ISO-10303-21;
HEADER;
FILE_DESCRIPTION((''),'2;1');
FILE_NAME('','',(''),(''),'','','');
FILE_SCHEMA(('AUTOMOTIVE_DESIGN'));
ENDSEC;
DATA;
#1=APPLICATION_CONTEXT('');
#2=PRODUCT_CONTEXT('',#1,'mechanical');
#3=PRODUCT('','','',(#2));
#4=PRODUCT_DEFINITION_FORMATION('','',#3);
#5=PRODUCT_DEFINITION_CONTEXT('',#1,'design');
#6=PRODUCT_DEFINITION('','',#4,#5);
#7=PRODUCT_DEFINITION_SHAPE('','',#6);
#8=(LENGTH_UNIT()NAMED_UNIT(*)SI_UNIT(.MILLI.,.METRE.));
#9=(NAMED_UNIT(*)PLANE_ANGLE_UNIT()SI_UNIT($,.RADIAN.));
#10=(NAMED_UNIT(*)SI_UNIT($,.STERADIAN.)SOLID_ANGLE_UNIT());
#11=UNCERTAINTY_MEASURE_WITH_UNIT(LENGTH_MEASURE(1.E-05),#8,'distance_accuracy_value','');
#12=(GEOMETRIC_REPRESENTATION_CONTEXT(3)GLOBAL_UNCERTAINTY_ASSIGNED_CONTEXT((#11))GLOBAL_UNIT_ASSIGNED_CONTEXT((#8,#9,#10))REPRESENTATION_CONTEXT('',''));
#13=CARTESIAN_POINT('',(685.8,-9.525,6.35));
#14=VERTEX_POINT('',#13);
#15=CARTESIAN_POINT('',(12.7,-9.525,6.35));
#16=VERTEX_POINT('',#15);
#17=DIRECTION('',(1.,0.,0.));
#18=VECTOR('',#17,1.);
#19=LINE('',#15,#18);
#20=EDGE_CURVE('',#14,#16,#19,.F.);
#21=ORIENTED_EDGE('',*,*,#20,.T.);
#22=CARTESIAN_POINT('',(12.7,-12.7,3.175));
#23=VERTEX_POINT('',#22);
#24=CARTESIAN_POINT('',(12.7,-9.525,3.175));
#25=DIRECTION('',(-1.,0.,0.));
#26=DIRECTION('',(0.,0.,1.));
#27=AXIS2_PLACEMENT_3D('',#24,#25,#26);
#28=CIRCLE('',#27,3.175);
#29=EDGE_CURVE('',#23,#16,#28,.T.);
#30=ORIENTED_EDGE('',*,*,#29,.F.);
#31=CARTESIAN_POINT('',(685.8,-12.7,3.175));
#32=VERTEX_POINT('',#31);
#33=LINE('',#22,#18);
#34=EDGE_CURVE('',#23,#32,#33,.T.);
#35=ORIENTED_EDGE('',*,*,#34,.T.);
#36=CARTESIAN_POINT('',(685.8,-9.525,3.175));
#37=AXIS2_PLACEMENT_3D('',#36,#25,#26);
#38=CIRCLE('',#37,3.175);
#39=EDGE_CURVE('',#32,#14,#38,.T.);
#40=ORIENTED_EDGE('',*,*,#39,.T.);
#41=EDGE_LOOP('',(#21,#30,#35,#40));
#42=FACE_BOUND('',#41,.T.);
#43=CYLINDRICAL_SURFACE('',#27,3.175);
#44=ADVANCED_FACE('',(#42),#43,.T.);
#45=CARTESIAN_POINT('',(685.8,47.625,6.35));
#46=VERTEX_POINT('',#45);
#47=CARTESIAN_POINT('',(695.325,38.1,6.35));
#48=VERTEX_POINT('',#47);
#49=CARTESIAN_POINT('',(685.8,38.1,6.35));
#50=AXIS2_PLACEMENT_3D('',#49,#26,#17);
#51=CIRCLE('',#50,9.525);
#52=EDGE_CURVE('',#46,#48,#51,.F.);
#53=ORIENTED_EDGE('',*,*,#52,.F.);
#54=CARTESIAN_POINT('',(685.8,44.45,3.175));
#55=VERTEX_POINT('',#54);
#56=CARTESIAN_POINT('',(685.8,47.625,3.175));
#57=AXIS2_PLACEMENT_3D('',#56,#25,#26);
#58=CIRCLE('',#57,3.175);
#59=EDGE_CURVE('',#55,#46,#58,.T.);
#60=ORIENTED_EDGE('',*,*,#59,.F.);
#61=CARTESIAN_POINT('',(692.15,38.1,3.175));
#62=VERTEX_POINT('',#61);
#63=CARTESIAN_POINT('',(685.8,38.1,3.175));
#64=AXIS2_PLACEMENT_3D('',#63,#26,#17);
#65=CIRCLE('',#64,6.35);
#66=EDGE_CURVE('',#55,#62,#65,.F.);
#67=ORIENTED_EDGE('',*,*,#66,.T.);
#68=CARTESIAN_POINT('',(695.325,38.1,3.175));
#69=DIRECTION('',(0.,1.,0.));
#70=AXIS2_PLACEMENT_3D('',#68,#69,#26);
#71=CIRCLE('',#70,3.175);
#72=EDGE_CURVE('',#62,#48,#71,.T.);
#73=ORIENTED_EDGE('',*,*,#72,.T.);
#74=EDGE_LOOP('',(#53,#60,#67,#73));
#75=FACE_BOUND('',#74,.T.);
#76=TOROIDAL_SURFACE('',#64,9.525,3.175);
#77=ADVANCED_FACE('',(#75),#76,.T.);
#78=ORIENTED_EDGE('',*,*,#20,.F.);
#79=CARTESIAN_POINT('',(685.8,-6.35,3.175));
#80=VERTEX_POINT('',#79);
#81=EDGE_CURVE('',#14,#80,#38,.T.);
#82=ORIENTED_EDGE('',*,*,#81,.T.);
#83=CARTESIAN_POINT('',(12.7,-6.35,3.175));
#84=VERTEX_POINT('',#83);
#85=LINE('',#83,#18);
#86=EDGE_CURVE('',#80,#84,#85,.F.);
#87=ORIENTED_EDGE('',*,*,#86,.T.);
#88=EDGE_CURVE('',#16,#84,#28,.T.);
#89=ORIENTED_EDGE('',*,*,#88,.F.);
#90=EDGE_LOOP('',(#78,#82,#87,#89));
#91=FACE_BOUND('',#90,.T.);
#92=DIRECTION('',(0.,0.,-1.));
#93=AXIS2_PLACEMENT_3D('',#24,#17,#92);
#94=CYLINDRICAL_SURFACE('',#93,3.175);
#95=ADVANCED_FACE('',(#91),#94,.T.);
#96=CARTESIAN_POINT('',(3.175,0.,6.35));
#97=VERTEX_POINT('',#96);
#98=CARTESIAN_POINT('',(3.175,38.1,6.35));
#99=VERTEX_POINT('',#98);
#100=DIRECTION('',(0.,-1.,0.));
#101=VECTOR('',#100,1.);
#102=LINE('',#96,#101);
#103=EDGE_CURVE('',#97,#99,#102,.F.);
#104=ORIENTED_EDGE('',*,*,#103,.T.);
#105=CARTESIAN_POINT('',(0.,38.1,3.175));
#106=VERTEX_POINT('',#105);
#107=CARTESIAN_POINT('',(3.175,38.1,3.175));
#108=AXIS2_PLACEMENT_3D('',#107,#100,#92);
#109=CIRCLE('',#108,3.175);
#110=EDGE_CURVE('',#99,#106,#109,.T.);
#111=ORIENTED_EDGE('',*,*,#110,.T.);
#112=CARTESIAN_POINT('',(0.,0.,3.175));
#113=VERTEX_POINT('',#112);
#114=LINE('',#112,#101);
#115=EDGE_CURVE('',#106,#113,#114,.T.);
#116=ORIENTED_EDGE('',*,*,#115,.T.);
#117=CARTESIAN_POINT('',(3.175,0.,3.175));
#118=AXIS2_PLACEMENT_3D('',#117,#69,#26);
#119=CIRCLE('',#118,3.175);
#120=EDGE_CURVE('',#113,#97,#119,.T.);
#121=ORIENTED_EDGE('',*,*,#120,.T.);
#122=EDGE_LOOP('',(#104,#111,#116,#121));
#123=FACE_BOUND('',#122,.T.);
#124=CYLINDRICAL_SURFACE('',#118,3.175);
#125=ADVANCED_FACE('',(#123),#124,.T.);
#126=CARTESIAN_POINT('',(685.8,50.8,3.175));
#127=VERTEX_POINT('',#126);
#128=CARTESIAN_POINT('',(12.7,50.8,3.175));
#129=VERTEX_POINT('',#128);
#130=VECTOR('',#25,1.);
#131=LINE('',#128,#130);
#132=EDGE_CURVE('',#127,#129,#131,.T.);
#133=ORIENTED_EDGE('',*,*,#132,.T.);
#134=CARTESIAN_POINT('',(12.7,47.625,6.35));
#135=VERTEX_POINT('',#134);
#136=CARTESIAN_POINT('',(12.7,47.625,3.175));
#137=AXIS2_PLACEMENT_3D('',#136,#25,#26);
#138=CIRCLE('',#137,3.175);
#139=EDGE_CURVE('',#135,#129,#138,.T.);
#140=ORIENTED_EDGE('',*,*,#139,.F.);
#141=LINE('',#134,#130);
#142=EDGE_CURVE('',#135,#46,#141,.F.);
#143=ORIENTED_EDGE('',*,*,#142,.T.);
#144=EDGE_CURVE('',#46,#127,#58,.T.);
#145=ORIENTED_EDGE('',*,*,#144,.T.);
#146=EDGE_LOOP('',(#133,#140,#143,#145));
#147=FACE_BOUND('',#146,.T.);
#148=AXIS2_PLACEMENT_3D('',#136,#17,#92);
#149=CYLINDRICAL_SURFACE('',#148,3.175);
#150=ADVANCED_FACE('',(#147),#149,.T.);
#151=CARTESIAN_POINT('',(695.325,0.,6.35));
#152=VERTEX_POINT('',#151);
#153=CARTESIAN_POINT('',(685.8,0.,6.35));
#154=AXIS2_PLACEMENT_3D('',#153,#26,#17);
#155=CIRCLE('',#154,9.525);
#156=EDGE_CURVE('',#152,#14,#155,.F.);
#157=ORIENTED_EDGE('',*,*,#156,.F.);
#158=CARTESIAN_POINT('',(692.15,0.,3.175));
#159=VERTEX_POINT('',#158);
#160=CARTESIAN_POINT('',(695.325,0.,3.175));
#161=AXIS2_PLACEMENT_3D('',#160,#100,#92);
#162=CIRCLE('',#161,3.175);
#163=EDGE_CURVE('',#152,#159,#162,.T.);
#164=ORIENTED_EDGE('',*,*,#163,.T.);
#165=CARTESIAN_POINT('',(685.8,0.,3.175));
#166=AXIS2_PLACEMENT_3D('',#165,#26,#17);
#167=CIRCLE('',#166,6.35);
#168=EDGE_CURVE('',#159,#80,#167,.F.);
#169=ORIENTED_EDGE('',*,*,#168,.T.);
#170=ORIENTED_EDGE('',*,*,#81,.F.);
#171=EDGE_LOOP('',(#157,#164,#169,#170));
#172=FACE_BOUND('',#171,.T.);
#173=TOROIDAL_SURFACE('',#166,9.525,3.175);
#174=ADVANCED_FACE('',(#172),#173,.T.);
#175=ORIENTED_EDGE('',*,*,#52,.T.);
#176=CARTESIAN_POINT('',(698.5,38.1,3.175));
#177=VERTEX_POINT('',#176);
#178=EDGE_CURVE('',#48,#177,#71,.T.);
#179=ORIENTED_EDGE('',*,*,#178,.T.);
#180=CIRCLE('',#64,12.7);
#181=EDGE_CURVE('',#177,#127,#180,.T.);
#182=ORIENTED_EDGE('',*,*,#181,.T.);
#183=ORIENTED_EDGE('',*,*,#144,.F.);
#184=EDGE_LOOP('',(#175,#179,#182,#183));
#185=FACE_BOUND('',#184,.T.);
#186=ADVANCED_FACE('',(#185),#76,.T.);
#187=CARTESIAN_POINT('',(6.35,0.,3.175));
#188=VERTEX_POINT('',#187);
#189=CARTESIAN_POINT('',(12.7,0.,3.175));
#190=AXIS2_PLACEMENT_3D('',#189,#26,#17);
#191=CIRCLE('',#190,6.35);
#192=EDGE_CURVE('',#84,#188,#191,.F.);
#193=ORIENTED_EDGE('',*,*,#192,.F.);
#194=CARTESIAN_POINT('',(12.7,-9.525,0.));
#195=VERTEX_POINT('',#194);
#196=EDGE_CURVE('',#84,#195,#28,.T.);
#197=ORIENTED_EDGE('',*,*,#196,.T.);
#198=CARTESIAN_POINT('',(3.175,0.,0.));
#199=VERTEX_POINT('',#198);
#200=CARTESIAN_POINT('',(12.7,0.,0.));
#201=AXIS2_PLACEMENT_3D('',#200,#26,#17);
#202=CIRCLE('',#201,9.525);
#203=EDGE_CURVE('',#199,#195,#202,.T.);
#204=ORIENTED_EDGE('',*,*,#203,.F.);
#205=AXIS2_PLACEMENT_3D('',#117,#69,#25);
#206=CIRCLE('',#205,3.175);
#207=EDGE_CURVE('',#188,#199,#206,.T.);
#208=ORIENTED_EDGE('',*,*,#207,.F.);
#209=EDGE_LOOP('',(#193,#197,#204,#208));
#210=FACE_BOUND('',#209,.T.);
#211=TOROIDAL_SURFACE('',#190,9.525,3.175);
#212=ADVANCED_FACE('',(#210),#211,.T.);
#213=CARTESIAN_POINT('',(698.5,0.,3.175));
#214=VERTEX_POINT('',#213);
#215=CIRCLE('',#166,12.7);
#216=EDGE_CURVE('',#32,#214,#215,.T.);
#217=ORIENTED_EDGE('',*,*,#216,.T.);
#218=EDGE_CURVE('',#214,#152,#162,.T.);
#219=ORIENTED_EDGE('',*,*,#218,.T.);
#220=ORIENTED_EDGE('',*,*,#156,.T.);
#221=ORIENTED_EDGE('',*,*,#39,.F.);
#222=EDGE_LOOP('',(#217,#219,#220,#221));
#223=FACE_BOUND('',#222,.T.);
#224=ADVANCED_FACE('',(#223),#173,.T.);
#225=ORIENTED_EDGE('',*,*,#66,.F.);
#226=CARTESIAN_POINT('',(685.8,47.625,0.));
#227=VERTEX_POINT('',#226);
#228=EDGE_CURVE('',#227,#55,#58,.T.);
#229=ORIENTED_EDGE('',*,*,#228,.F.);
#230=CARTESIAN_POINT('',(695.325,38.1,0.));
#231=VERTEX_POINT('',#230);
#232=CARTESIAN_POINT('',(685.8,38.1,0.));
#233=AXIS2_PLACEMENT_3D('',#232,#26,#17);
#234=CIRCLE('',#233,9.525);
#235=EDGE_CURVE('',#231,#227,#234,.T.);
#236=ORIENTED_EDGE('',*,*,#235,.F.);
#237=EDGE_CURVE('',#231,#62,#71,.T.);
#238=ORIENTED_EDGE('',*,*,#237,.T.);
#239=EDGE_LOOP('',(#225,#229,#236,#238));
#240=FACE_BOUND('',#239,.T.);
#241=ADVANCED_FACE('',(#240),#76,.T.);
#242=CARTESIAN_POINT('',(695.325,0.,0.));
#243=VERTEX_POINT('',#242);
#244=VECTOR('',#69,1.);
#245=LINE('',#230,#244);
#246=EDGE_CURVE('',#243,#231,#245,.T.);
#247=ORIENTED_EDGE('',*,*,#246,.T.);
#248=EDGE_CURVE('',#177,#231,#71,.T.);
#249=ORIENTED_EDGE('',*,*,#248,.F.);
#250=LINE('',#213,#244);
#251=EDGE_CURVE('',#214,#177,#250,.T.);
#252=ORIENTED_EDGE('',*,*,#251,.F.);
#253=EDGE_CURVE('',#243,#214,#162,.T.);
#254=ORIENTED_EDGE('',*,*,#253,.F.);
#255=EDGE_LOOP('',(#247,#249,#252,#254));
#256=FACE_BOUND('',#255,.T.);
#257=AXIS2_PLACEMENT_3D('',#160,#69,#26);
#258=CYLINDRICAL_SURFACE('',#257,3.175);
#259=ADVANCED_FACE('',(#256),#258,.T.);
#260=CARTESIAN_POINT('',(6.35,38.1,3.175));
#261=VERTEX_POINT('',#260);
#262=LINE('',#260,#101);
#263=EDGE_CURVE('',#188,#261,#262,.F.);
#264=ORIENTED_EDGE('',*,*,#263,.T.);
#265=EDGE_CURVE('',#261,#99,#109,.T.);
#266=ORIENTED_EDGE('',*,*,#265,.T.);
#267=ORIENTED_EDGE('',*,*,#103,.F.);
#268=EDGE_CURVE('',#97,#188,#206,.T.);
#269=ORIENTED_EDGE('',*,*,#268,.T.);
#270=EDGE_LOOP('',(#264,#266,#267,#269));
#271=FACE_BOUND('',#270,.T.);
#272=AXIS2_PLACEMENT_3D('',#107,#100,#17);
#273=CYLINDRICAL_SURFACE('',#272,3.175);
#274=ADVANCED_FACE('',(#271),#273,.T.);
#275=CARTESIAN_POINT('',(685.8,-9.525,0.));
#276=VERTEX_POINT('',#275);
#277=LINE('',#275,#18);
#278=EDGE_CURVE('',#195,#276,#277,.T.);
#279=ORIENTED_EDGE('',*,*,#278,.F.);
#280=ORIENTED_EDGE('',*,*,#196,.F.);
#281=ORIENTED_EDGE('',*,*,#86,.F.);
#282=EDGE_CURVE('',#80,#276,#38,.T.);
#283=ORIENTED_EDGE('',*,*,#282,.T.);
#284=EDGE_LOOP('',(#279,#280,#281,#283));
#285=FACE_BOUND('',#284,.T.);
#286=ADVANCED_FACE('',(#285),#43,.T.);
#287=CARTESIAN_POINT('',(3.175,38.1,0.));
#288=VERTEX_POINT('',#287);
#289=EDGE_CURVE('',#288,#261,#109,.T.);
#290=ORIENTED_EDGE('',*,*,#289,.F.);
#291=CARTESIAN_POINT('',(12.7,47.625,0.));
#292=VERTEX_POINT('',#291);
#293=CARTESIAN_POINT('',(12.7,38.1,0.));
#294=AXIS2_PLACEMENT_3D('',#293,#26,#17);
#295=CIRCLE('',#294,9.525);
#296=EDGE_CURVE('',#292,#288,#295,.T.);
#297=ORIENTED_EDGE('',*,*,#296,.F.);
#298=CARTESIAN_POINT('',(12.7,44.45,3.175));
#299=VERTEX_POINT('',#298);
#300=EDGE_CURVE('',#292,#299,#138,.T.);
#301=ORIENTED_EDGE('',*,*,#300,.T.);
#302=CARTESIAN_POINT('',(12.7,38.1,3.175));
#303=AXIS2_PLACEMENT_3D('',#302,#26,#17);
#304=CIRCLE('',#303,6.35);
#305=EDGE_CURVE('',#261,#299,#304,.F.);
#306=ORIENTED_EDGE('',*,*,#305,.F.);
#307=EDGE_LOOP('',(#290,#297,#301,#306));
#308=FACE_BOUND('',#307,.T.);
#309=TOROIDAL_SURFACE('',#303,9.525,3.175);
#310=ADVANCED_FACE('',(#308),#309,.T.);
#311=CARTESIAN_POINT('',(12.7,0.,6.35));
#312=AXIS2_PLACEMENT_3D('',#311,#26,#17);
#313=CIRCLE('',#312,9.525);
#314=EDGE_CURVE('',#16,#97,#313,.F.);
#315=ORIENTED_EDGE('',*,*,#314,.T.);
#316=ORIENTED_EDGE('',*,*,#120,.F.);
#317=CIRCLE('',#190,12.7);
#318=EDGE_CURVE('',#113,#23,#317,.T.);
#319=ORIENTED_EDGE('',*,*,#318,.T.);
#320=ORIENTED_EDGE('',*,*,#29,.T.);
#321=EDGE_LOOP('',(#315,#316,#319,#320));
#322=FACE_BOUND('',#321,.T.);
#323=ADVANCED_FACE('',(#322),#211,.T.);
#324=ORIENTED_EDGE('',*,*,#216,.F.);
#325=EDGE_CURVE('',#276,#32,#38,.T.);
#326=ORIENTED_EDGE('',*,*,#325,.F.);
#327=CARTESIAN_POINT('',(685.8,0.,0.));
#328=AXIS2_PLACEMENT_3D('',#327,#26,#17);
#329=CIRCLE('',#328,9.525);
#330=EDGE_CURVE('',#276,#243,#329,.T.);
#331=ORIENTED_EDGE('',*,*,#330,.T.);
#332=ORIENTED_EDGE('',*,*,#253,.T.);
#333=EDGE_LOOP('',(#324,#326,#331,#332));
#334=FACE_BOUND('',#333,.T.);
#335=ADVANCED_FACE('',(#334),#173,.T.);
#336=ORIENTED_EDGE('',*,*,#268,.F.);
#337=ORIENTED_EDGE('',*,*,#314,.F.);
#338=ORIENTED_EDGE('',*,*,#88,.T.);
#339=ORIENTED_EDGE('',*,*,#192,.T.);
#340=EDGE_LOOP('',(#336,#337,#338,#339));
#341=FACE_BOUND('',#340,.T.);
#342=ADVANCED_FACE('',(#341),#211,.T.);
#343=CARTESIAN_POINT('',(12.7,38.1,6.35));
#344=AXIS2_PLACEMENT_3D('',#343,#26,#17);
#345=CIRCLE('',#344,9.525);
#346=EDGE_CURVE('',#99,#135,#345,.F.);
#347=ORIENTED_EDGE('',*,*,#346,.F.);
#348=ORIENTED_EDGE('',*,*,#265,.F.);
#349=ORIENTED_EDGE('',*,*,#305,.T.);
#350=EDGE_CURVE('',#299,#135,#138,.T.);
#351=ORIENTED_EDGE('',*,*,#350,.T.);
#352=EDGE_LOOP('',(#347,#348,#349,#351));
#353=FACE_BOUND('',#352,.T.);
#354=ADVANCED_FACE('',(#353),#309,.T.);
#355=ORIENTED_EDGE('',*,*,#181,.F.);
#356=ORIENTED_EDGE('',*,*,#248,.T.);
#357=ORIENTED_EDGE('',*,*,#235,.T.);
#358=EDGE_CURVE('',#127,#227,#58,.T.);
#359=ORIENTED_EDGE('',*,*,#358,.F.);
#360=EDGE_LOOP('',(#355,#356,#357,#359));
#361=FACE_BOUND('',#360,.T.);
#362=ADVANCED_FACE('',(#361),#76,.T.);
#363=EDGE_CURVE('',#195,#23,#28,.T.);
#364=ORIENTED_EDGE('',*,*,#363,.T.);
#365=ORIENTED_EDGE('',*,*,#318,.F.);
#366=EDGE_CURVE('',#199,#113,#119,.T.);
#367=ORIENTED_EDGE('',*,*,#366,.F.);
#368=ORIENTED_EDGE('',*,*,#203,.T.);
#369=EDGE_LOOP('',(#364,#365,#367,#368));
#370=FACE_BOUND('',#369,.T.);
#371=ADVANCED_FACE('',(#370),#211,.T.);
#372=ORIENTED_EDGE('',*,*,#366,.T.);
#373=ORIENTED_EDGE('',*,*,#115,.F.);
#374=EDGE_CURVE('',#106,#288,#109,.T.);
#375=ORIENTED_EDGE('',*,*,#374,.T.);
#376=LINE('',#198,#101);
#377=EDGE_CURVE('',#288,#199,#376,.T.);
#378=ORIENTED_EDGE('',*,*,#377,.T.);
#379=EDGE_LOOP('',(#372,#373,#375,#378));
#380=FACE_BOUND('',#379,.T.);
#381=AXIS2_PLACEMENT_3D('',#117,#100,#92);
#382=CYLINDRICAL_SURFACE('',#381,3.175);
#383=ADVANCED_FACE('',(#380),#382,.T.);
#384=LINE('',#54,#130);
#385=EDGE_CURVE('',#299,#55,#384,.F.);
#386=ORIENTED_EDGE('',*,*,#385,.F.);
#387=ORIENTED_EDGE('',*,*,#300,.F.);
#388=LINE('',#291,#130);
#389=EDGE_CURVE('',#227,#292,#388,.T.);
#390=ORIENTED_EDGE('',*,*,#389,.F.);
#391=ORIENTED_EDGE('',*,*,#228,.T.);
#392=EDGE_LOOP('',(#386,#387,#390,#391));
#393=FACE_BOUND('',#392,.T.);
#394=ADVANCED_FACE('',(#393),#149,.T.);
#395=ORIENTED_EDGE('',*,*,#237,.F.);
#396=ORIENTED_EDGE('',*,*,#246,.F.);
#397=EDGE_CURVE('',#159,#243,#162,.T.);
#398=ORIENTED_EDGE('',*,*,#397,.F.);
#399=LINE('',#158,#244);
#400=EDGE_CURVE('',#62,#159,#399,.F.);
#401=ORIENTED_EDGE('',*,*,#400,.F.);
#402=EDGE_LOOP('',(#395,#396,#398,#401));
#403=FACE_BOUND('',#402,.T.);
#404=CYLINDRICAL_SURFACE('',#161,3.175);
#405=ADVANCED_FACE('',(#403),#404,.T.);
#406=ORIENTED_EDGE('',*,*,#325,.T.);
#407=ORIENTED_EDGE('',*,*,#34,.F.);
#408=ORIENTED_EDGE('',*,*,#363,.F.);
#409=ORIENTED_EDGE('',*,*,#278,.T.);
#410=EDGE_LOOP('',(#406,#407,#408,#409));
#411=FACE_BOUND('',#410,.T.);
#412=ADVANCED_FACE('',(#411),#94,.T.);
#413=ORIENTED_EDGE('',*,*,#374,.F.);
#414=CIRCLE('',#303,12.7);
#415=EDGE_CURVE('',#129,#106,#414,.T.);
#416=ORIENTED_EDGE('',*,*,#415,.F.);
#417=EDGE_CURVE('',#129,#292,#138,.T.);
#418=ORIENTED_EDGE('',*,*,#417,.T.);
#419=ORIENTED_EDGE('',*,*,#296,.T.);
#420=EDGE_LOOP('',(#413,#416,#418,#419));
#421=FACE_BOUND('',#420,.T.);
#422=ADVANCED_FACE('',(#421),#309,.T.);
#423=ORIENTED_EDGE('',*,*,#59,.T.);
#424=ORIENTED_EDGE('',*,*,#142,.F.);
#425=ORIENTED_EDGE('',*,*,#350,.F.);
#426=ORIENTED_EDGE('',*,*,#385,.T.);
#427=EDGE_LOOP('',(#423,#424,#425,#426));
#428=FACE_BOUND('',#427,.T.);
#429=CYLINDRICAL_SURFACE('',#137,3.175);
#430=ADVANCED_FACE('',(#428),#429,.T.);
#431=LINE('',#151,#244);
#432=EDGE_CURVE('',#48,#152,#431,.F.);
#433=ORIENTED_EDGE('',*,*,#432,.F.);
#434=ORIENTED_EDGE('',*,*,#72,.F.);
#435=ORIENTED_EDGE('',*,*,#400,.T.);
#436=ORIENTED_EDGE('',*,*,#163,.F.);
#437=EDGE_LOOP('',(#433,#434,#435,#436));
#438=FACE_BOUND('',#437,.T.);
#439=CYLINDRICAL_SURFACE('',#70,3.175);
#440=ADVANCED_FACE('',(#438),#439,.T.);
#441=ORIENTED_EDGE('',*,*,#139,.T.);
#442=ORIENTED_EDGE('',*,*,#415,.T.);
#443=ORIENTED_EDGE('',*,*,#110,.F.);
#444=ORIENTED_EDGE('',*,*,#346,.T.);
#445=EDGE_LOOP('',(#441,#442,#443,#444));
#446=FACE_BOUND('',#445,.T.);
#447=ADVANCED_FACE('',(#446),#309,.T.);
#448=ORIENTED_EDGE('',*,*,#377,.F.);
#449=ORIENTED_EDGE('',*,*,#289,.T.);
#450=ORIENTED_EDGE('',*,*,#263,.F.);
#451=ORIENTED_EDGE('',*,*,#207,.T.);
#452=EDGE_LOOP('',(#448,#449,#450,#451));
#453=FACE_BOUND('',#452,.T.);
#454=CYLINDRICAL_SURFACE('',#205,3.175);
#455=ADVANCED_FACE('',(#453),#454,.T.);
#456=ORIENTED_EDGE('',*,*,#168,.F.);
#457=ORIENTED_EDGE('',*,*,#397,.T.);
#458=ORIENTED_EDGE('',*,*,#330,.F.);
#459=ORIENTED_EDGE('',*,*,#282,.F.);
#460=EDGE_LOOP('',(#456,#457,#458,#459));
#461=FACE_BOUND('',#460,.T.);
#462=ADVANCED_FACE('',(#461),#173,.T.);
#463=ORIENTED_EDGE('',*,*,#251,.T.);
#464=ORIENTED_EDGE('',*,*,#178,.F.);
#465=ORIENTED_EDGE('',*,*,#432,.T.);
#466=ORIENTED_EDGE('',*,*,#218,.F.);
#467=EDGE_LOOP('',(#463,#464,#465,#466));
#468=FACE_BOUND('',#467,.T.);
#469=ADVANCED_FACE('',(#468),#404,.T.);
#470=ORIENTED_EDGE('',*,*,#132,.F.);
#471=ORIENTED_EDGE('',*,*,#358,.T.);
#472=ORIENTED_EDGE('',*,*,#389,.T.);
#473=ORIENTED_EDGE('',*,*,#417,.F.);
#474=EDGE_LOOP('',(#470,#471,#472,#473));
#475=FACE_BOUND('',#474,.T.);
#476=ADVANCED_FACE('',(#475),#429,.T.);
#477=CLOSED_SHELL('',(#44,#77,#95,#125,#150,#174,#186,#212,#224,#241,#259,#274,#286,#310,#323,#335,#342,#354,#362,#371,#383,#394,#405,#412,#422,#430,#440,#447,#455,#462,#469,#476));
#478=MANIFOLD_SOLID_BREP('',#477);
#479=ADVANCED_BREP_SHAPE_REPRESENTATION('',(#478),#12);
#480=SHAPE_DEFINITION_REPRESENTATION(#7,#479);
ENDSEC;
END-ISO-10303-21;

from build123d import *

# Parameters (mm, degrees)
BOSS_EXTRUDE1_DEPTH = 6.35
FILLET3_R           = 3.175


with BuildPart() as part:
    # Sketch2 → Boss-Extrude1 (new body)
    with BuildSketch(Plane.XY):
        with BuildLine():
            Line((0, 0), (0, 38.1))
            ThreePointArc((0, 38.1), (3.719743879, 47.080256121), (12.7, 50.8))
            Line((12.7, 50.8), (685.8, 50.8))
            ThreePointArc((685.8, 50.8), (694.780256121, 47.080256121), (698.5, 38.1))
            Line((698.5, 38.1), (698.5, 0))
            ThreePointArc((698.5, 0), (694.780256121, -8.980256121), (685.8, -12.7))
            Line((685.8, -12.7), (12.7, -12.7))
            ThreePointArc((12.7, -12.7), (3.719743879, -8.980256121), (0, 0))
        make_face()
        with BuildLine():
            Line((6.35, 38.1), (6.35, 0))
            ThreePointArc((6.35, 0), (8.209871939, -4.490128061), (12.7, -6.35))
            Line((12.7, -6.35), (685.8, -6.35))
            ThreePointArc((685.8, -6.35), (690.290128061, -4.490128061), (692.15, 0))
            Line((692.15, 0), (692.15, 38.1))
            ThreePointArc((692.15, 38.1), (690.290128061, 42.590128061), (685.8, 44.45))
            Line((685.8, 44.45), (12.7, 44.45))
            ThreePointArc((12.7, 44.45), (8.209871939, 42.590128061), (6.35, 38.1))
        make_face(mode=Mode.SUBTRACT)
    extrude(amount=BOSS_EXTRUDE1_DEPTH)

    # Fillet3
    fillet3_edges = [part.edges().sort_by_distance(p)[0] for p in [
        (0, 19.05, 6.35),
        (3.719743879, 47.080256121, 6.35),
        (349.25, 50.8, 6.35),
        (694.780256121, 47.080256121, 6.35),
        (698.5, 19.05, 6.35),
        (694.780256121, -8.980256121, 6.35),
        (349.25, -12.7, 6.35),
        (3.719743879, -8.980256121, 6.35),
        (0, 19.05, 0),
        (3.719743879, 47.080256121, 0),
        (349.25, 50.8, 0),
        (694.780256121, 47.080256121, 0),
        (698.5, 19.05, 0),
        (694.780256121, -8.980256121, 0),
        (349.25, -12.7, 0),
        (3.719743879, -8.980256121, 0),
        (349.25, 44.45, 6.35),
        (690.290128061, 42.590128061, 6.35),
        (692.15, 19.05, 6.35),
        (690.290128061, -4.490128061, 6.35),
        (349.25, -6.35, 6.35),
        (8.209871939, -4.490128061, 6.35),
        (6.35, 19.05, 6.35),
        (8.209871939, 42.590128061, 6.35),
        (349.25, 44.45, 0),
        (690.290128061, 42.590128061, 0),
        (692.15, 19.05, 0),
        (690.290128061, -4.490128061, 0),
        (349.25, -6.35, 0),
        (8.209871939, -4.490128061, 0),
        (6.35, 19.05, 0),
        (8.209871939, 42.590128061, 0),
    ]]
    fillet(fillet3_edges, radius=FILLET3_R - 0.0001)  # a hair under: the kernel refuses the full size


solid = part.part
